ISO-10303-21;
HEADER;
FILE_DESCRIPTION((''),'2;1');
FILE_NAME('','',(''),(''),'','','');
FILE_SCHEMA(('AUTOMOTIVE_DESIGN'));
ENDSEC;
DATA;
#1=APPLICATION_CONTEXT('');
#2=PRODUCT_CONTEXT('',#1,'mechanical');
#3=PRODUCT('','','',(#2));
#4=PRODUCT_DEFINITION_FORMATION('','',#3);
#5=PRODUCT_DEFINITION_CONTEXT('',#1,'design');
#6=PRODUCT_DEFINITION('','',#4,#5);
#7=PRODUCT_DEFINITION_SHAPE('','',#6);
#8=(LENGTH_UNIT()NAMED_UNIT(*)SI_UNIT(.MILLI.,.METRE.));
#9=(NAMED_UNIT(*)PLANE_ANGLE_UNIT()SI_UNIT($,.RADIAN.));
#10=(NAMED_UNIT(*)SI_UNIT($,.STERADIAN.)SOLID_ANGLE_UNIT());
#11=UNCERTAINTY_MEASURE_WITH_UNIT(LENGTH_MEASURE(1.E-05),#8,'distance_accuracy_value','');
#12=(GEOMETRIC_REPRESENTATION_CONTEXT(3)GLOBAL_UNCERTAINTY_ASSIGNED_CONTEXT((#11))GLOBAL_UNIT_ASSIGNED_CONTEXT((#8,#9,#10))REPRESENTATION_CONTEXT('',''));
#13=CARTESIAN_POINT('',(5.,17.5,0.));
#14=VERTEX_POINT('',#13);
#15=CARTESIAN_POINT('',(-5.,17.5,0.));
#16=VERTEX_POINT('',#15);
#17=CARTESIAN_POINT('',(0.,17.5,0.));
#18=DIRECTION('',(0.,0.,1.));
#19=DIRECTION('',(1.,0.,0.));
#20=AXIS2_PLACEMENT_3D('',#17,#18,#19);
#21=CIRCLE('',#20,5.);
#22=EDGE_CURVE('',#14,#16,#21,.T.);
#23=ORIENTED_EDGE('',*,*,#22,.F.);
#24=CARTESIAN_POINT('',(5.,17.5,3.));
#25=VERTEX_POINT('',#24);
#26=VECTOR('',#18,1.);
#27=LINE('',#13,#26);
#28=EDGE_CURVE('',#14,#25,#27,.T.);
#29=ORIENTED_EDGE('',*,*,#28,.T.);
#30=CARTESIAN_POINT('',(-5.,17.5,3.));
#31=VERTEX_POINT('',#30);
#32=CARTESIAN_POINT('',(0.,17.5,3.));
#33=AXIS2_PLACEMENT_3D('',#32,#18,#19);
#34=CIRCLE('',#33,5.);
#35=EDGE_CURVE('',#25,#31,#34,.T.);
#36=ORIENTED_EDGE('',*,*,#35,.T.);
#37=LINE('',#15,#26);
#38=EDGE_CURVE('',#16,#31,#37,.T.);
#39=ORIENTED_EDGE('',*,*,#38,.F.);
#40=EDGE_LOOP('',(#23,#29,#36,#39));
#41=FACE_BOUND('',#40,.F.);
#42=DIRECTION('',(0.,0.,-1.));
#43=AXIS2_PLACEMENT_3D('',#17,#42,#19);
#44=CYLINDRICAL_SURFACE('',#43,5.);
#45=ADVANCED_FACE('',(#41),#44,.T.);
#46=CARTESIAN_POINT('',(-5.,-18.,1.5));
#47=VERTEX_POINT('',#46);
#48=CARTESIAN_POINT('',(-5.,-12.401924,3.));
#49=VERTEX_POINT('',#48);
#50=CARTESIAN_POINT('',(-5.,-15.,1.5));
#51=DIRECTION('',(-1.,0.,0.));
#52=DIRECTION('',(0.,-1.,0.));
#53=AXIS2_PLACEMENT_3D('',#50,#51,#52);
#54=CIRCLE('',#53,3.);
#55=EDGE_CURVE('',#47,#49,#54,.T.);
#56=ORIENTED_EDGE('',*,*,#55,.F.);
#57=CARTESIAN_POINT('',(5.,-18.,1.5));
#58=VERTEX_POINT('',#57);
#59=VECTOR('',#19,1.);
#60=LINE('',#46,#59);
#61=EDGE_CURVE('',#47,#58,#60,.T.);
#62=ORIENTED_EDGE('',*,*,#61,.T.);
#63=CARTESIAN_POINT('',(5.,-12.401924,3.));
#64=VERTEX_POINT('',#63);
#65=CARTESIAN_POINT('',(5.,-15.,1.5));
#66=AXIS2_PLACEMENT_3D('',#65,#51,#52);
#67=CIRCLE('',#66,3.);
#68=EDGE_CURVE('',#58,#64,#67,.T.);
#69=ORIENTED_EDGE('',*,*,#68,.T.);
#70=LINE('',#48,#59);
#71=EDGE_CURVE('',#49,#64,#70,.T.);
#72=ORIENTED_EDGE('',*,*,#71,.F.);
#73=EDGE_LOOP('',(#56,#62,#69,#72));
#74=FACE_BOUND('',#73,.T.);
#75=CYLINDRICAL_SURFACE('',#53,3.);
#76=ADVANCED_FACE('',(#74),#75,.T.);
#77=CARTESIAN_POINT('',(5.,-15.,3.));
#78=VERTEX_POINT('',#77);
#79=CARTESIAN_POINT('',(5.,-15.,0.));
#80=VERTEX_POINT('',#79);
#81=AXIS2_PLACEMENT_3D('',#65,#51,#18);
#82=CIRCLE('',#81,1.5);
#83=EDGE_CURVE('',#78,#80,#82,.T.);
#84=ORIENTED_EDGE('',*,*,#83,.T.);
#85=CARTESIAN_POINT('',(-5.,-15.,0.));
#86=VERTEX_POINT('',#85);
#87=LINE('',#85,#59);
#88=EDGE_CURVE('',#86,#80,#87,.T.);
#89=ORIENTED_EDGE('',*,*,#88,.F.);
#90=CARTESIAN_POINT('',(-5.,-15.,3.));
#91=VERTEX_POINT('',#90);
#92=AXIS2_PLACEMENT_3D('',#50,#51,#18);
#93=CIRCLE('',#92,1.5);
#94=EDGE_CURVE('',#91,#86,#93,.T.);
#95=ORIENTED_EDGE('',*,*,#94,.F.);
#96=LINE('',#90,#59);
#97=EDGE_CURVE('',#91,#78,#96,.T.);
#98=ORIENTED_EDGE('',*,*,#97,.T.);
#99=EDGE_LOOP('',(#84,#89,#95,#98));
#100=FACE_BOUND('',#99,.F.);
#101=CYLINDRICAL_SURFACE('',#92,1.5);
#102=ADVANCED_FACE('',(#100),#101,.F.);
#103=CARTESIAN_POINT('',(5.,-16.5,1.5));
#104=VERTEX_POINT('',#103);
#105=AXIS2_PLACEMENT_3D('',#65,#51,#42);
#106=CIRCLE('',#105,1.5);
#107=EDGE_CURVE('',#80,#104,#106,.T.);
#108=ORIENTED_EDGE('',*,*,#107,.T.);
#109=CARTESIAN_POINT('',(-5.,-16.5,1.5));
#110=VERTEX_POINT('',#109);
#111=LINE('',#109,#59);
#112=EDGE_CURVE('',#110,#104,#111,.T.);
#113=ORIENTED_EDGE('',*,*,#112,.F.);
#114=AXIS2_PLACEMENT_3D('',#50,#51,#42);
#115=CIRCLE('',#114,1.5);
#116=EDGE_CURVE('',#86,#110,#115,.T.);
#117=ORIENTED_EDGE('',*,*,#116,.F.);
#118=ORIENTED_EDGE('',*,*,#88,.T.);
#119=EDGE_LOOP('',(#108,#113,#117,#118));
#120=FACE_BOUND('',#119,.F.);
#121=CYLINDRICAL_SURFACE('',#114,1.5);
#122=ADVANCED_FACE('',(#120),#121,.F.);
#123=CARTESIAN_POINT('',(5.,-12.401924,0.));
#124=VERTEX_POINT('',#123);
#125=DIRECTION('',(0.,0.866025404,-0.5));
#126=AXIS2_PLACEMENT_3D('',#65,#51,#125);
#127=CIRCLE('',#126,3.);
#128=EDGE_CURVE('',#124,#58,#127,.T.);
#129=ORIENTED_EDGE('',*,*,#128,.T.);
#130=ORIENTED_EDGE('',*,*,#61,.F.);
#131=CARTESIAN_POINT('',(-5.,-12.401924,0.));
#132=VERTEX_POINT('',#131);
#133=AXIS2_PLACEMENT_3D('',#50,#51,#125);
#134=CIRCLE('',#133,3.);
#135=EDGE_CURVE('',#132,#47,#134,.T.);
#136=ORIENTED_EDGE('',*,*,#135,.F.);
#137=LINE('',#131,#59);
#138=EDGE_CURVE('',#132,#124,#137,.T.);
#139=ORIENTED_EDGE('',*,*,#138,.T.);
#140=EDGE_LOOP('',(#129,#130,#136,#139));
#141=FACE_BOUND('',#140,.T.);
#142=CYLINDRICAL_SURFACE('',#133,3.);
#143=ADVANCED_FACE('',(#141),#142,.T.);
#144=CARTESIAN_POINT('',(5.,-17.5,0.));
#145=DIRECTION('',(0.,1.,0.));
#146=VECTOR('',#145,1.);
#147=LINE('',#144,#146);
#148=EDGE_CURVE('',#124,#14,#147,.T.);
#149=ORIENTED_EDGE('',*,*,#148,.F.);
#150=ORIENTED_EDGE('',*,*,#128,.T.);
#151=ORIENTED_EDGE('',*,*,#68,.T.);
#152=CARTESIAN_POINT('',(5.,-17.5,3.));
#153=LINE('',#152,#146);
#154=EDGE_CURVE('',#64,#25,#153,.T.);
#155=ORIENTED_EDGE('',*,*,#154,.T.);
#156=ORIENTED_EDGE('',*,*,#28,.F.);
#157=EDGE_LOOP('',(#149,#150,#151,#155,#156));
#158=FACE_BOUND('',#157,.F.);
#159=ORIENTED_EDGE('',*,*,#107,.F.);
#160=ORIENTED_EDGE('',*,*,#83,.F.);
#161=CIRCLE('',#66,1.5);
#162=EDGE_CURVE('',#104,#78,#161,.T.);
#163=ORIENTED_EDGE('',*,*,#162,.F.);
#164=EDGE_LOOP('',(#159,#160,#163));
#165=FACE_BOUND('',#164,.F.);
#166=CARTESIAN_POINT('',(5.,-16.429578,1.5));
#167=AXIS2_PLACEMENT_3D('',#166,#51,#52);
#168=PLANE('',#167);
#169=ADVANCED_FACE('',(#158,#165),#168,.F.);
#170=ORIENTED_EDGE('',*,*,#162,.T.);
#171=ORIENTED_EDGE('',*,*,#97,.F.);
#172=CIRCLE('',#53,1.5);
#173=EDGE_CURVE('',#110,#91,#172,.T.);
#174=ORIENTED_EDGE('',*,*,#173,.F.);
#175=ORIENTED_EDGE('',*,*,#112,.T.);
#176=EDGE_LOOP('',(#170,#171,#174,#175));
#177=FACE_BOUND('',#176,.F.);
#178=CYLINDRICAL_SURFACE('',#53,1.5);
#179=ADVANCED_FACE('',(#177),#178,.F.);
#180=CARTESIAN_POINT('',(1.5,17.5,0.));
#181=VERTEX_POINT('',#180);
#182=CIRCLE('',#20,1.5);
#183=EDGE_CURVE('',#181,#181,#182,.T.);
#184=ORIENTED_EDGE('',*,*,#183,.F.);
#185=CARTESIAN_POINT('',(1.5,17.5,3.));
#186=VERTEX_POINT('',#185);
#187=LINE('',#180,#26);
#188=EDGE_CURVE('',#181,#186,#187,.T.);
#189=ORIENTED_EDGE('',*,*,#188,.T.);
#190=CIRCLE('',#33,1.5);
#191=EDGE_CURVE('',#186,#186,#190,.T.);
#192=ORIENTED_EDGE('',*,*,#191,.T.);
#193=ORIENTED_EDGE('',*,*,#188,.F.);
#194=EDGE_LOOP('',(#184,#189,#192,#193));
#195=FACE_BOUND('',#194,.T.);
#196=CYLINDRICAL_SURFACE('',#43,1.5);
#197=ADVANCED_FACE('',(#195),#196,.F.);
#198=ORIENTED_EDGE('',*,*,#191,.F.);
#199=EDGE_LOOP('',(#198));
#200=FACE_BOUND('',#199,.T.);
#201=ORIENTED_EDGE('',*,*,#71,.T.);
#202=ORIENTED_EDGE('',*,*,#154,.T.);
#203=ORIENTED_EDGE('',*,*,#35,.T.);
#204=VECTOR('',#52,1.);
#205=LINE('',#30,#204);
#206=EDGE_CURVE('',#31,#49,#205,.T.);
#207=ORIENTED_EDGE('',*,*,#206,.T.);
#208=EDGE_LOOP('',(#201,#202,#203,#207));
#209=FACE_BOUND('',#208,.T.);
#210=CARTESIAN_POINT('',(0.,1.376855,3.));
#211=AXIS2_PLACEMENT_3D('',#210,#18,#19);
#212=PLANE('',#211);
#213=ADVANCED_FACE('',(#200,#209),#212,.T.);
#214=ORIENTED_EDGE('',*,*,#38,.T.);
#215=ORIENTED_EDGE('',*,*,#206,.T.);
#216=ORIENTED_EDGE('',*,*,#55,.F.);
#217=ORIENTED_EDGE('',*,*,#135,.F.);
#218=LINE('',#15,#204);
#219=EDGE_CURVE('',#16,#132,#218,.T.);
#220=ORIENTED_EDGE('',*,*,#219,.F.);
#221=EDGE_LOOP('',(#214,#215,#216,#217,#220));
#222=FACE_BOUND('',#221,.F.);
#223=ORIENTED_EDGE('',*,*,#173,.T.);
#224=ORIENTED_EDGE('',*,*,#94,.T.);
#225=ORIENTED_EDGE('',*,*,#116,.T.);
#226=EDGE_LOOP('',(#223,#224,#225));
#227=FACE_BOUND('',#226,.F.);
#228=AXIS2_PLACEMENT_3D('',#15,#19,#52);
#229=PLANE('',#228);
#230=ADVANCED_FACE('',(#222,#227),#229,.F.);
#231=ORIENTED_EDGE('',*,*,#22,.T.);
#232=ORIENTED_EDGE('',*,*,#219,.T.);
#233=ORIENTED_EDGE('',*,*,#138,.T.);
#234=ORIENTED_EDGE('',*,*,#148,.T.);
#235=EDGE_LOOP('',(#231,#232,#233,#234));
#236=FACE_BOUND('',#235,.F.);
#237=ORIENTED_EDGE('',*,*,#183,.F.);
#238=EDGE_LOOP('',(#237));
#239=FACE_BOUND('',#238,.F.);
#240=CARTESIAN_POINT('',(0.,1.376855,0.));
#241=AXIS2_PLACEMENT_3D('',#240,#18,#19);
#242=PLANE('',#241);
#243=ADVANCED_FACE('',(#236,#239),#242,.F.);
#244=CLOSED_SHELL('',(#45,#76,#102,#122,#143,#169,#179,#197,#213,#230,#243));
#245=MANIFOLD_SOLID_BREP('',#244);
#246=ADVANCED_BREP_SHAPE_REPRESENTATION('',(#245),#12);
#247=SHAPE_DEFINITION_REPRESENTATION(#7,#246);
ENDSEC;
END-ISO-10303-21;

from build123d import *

# Parameters (mm, degrees)
F0_R     = 1.5
F1_DEPTH = 3
F3_DEPTH = 10
F4_DEPTH = 10.001


with BuildPart() as f1:
    # F0 (on Top) → F1 (new body)
    with BuildSketch(Plane.XY):
        with BuildLine():
            Line((-5, -17.5), (5, -17.5))
            Line((5, -17.5), (5, 17.5))
            ThreePointArc((5, 17.5), (0, 22.5), (-5, 17.5))
            Line((-5, 17.5), (-5, -17.5))
        make_face()
        with Locations((0, 17.5)):
            Circle(F0_R, mode=Mode.SUBTRACT)
    extrude(amount=F1_DEPTH)

    # F2 (on face) → F3 (join, through all)
    with BuildSketch(Plane(origin=(-5, 0, 0), x_dir=(0, -1, 0), z_dir=(-1, 0, 0))):
        with BuildLine():
            ThreePointArc((15, 3), (16.0606601718, 2.5606601718), (16.5, 1.5))
            ThreePointArc((16.5, 1.5), (16.0606601718, 0.4393398282), (15, 0))
            Line((15, 0), (17.5, 0))
            Line((17.5, 0), (17.5, 3))
            Line((17.5, 3), (15, 3))
        make_face()
        with BuildLine():
            Line((12.4019237886, 3), (15, 3))
            Line((15, 3), (17.5, 3))
            Line((17.5, 3), (17.5, 0))
            Line((17.5, 0), (15, 0))
            Line((15, 0), (12.4019237886, 0))
            ThreePointArc((12.4019237886, 0), (15.7764571353, -1.3977774789), (18, 1.5))
            ThreePointArc((18, 1.5), (15.7764571353, 4.3977774789), (12.4019237886, 3))
        make_face()
    extrude(amount=-F3_DEPTH)

    # F2 (on face) → F4 (cut, through all)
    with BuildSketch(Plane(origin=(-5, 0, 0), x_dir=(0, -1, 0), z_dir=(-1, 0, 0))):
        with BuildLine():
            ThreePointArc((15, 0), (16.0606601718, 0.4393398282), (16.5, 1.5))
            ThreePointArc((16.5, 1.5), (16.0606601718, 2.5606601718), (15, 3))
            ThreePointArc((15, 3), (13.5, 1.5), (15, 0))
        make_face()
    extrude(amount=-F4_DEPTH, mode=Mode.SUBTRACT)


solid = f1.part
